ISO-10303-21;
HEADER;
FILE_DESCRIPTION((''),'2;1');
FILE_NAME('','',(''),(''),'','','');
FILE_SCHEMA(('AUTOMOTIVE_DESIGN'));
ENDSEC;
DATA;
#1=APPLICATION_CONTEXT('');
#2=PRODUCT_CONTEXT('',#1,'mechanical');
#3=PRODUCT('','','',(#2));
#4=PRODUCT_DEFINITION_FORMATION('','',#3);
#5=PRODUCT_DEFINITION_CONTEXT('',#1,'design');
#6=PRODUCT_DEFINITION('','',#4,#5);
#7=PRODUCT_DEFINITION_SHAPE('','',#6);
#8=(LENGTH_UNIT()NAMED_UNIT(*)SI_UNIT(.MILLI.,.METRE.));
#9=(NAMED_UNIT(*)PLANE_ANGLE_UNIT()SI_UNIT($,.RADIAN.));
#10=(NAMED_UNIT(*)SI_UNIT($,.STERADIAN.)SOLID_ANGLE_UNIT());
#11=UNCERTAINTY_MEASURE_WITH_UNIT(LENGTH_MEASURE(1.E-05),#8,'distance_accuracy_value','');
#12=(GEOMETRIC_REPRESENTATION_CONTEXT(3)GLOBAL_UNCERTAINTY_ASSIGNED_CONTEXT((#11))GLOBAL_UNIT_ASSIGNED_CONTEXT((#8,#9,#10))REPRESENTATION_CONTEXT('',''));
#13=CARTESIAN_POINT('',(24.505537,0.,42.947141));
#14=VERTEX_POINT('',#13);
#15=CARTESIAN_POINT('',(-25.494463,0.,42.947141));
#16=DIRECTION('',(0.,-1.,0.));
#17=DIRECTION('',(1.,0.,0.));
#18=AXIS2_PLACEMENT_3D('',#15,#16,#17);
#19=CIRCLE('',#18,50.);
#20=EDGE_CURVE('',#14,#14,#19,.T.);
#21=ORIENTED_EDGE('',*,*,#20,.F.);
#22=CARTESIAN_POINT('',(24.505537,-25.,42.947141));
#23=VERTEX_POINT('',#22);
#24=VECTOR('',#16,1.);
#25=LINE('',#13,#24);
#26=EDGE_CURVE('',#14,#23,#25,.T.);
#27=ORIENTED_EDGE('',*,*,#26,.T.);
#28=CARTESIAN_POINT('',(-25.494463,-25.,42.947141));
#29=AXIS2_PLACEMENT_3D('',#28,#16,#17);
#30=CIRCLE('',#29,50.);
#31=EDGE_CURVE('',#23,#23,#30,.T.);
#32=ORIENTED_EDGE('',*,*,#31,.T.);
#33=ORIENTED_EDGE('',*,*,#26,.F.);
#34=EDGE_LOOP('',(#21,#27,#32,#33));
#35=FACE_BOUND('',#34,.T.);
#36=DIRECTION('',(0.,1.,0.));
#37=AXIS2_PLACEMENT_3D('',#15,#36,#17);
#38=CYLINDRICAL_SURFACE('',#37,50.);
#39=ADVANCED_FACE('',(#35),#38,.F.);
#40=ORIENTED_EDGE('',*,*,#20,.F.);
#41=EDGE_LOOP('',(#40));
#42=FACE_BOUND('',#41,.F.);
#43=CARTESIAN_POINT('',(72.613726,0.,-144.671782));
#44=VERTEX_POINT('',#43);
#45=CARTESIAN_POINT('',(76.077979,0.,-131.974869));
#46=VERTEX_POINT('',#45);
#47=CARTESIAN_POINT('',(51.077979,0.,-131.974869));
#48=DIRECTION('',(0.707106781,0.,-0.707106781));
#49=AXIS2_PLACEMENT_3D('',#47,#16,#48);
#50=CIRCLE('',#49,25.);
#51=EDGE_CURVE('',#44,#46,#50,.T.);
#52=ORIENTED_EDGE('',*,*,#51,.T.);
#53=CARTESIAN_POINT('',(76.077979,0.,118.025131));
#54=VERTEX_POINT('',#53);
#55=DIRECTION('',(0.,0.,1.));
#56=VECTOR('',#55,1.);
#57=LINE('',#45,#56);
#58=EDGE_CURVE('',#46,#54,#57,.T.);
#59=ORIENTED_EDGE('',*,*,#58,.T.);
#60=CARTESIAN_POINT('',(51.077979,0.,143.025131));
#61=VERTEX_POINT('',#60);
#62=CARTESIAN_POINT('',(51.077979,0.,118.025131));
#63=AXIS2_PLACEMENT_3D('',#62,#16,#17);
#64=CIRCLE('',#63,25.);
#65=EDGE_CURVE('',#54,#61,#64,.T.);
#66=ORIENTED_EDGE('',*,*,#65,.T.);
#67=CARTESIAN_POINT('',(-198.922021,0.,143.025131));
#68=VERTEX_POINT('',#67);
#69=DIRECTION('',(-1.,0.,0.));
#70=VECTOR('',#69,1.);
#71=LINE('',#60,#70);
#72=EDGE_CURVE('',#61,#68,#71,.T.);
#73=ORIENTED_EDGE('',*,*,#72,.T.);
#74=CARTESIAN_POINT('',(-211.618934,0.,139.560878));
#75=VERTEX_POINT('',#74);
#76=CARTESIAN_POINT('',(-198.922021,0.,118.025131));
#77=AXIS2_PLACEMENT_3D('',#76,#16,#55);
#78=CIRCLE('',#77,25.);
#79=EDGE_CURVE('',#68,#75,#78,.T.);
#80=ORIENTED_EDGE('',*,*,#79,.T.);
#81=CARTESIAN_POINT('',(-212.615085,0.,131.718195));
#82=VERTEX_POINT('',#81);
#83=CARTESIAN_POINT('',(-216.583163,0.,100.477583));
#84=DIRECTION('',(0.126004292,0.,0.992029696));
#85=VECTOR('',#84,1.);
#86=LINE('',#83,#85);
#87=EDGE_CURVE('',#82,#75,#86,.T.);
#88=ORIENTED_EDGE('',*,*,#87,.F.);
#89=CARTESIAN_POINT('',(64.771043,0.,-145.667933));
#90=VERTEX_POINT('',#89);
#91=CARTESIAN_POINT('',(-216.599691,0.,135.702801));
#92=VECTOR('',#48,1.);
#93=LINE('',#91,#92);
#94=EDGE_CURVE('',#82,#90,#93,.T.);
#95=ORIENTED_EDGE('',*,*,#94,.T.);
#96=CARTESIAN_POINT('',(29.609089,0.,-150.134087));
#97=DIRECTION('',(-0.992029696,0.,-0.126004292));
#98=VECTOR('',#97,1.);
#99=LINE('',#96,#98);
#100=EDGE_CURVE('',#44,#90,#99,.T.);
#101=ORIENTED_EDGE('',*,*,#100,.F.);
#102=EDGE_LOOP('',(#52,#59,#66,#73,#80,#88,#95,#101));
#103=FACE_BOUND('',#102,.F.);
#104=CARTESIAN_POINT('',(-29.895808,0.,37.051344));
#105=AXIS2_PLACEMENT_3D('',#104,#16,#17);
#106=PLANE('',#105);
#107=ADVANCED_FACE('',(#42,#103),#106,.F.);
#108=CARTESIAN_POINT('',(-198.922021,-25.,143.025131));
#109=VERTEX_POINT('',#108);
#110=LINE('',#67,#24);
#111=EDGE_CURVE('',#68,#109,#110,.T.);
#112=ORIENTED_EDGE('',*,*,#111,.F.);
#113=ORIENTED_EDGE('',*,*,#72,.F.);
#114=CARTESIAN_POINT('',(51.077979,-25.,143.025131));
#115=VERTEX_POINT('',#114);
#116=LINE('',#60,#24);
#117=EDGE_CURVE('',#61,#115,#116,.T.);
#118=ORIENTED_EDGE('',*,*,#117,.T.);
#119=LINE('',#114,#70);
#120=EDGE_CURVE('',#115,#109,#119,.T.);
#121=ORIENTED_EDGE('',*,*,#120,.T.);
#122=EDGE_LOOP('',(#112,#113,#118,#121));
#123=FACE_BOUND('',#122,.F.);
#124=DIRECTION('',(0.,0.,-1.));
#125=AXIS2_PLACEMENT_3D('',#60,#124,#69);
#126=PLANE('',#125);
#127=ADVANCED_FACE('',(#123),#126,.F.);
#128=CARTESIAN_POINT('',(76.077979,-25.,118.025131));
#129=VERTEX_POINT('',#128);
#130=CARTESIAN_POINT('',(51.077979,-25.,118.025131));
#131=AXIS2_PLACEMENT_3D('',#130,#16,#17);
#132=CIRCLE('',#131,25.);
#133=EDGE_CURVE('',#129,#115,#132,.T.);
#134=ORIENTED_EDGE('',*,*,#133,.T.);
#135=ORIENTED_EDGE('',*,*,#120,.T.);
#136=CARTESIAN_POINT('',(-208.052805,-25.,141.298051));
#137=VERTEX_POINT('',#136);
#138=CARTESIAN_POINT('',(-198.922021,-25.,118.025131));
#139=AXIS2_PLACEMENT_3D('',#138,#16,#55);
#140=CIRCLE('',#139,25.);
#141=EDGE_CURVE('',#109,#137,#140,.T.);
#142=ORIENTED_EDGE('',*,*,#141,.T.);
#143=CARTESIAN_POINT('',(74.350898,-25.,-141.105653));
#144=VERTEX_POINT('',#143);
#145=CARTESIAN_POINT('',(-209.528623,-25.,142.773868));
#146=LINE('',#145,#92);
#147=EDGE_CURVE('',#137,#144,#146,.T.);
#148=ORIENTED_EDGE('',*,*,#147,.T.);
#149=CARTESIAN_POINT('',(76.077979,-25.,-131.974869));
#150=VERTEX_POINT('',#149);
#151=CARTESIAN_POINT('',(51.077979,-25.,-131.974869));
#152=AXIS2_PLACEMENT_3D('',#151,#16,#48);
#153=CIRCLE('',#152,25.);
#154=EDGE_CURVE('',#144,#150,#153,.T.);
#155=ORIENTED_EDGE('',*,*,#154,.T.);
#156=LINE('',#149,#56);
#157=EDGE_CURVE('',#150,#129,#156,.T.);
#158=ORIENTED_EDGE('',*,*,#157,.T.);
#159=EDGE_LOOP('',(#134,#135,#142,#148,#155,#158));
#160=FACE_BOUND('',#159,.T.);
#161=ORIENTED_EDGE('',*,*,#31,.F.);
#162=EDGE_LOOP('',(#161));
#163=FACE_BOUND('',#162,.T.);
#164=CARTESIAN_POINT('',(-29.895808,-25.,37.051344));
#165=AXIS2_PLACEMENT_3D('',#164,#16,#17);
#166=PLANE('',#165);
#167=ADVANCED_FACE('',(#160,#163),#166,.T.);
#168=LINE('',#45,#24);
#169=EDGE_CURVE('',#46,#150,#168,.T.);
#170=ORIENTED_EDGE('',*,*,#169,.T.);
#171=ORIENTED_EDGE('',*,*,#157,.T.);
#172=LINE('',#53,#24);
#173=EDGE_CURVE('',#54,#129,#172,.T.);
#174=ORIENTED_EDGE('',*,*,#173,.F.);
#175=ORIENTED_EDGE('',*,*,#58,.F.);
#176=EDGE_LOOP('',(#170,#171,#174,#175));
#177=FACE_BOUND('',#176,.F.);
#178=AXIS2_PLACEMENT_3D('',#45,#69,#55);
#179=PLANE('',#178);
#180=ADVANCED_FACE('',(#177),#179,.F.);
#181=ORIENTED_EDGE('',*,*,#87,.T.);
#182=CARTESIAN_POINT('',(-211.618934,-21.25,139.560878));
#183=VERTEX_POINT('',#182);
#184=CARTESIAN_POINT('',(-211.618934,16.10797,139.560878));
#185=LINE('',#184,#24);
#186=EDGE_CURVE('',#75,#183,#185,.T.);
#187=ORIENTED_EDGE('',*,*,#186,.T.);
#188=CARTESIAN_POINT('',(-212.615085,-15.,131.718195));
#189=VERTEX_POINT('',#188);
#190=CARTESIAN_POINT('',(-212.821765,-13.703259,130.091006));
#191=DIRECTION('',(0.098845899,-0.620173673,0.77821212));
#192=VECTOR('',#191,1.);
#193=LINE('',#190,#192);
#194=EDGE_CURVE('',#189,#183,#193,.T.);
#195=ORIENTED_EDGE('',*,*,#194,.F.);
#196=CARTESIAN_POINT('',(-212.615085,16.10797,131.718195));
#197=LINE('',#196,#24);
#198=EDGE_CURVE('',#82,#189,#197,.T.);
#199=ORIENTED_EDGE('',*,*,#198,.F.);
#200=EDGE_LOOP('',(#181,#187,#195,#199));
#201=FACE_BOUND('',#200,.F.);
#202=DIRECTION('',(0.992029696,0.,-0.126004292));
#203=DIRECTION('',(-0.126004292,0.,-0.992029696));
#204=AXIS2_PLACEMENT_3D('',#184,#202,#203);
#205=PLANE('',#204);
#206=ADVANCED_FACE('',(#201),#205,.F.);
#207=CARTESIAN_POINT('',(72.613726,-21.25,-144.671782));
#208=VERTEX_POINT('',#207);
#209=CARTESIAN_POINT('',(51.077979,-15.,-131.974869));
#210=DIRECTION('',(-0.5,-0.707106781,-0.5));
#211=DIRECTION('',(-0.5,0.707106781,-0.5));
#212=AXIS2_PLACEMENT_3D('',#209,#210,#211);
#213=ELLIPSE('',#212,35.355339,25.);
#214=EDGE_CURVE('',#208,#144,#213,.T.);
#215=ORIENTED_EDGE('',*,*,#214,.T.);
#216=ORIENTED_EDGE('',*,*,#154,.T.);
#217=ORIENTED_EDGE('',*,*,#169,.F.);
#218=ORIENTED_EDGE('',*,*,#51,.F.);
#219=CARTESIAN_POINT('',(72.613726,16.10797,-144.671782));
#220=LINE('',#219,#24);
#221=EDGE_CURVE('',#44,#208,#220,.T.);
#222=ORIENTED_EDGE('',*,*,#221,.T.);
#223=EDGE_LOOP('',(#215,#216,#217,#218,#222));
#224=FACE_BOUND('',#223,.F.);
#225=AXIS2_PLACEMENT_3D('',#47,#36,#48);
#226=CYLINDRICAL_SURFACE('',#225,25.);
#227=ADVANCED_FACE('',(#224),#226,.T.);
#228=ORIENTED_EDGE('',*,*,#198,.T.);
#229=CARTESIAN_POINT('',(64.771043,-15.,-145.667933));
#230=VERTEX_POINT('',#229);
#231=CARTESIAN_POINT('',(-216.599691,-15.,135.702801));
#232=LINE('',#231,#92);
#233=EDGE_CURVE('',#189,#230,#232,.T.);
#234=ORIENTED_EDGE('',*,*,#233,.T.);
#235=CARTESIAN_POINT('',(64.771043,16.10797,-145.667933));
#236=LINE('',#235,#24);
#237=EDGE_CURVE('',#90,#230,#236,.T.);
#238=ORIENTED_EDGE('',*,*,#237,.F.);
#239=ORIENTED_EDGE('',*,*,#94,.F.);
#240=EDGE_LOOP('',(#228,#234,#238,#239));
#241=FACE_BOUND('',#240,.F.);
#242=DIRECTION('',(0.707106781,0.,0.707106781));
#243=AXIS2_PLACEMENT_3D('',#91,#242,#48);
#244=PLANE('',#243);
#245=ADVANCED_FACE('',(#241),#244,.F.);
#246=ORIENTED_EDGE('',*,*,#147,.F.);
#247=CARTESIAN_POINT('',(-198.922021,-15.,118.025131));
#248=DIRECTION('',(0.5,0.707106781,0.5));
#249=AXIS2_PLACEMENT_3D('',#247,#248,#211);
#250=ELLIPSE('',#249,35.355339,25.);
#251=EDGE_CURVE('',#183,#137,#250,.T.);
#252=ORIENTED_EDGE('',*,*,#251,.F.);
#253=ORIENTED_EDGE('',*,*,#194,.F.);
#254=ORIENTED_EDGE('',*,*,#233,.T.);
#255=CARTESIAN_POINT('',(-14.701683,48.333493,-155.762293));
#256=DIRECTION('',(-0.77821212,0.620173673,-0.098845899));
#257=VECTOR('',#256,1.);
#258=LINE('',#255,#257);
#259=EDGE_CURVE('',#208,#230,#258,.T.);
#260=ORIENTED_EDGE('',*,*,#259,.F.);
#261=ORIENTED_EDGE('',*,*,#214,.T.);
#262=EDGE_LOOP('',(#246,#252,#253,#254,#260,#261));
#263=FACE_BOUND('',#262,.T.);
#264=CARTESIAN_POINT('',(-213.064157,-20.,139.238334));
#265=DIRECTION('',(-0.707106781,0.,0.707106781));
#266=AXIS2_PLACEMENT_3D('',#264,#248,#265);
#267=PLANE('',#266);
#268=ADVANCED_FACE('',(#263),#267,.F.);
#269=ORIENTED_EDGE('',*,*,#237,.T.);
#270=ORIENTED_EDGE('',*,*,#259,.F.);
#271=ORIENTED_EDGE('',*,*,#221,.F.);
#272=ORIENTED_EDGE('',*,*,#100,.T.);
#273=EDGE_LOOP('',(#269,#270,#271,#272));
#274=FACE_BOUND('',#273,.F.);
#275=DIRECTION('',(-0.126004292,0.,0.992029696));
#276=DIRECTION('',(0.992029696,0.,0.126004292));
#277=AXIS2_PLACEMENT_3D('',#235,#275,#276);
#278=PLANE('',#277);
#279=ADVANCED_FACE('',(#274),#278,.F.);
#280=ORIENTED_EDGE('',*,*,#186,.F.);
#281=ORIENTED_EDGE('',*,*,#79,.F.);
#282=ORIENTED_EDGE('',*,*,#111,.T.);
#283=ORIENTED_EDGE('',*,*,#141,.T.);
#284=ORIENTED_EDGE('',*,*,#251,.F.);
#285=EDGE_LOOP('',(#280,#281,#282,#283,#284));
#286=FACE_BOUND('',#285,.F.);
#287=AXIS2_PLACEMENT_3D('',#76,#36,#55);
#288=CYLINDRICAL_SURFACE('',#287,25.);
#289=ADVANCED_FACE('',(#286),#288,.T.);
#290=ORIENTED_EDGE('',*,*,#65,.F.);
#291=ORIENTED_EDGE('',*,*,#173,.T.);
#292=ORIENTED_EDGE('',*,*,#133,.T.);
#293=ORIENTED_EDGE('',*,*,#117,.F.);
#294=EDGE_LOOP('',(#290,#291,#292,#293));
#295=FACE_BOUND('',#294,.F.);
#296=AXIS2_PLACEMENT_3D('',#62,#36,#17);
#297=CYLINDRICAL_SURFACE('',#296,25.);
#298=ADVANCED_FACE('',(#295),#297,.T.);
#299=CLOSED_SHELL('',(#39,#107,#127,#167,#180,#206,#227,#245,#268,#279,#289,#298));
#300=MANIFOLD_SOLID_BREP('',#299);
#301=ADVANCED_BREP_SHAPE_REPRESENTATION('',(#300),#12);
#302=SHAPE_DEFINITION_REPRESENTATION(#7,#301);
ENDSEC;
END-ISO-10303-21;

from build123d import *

# Parameters (mm, degrees)
F0_R        = 50
F1_DEPTH    = 25
F2_SIZE     = 10
F3_T1_DEPTH = 47.2159409701


# Not quite as in the source:
# - a fillet or chamfer that OpenCascade refuses, or shapes differently, is made with other operations: its cross-section is extruded or revolved along the edge and cut away or added


with BuildPart() as f1:
    # F0 (on Front) → F1 (new body)
    with BuildSketch(Plane.XZ):
        with BuildLine():
            Line((51.0779787002, 143.0251310061), (-198.9220212998, 143.0251310061))
            ThreePointArc((-198.9220212998, 143.0251310061), (-208.4891071089, 141.1221193189), (-216.5996908295, 135.7028005358))
            Line((-216.5996908295, 135.7028005358), (68.7556482299, -149.6525385235))
            ThreePointArc((68.7556482299, -149.6525385235), (74.174967013, -141.541954803), (76.0779787002, -131.9748689939))
            Line((76.0779787002, -131.9748689939), (76.0779787002, 118.0251310061))
            ThreePointArc((76.0779787002, 118.0251310061), (68.7556482299, 135.7028005358), (51.0779787002, 143.0251310061))
        make_face()
        with Locations((-25.4944633545, 42.9471413087)):
            Circle(F0_R, mode=Mode.SUBTRACT)
    extrude(amount=F1_DEPTH)

    # F2
    f2_edges = [f1.edges().sort_by_distance(p)[0] for p in [
        (-73.922021, -25, -6.974869),
    ]]
    chamfer(f2_edges, length=F2_SIZE)

    # F3: chamfer of 5 on 2 edges, made by hand

    # F3_s2 → F3_t1 (cut)
    with BuildSketch(Plane.XZ.offset(-16.1079704851)):
        with BuildLine():
            Line((64.7710426378, -145.6679329315), (72.6137260047, -144.6717815335))
            ThreePointArc((72.6137260047, -144.6717815335), (70.8856590953, -147.2279276171), (68.7556482299, -149.6525385235))
            Line((68.7556482299, -149.6525385235), (64.7710426378, -145.6679329315))
        make_face()
        with BuildLine():
            Line((-211.6189338394, 139.5608783106), (-212.6150852374, 131.7181949438))
            Line((-212.6150852374, 131.7181949438), (-216.5996908295, 135.7028005358))
            ThreePointArc((-216.5996908295, 135.7028005358), (-214.1750799231, 137.8328114012), (-211.6189338394, 139.5608783106))
        make_face()
    extrude(amount=F3_T1_DEPTH, mode=Mode.SUBTRACT)


solid = f1.part
